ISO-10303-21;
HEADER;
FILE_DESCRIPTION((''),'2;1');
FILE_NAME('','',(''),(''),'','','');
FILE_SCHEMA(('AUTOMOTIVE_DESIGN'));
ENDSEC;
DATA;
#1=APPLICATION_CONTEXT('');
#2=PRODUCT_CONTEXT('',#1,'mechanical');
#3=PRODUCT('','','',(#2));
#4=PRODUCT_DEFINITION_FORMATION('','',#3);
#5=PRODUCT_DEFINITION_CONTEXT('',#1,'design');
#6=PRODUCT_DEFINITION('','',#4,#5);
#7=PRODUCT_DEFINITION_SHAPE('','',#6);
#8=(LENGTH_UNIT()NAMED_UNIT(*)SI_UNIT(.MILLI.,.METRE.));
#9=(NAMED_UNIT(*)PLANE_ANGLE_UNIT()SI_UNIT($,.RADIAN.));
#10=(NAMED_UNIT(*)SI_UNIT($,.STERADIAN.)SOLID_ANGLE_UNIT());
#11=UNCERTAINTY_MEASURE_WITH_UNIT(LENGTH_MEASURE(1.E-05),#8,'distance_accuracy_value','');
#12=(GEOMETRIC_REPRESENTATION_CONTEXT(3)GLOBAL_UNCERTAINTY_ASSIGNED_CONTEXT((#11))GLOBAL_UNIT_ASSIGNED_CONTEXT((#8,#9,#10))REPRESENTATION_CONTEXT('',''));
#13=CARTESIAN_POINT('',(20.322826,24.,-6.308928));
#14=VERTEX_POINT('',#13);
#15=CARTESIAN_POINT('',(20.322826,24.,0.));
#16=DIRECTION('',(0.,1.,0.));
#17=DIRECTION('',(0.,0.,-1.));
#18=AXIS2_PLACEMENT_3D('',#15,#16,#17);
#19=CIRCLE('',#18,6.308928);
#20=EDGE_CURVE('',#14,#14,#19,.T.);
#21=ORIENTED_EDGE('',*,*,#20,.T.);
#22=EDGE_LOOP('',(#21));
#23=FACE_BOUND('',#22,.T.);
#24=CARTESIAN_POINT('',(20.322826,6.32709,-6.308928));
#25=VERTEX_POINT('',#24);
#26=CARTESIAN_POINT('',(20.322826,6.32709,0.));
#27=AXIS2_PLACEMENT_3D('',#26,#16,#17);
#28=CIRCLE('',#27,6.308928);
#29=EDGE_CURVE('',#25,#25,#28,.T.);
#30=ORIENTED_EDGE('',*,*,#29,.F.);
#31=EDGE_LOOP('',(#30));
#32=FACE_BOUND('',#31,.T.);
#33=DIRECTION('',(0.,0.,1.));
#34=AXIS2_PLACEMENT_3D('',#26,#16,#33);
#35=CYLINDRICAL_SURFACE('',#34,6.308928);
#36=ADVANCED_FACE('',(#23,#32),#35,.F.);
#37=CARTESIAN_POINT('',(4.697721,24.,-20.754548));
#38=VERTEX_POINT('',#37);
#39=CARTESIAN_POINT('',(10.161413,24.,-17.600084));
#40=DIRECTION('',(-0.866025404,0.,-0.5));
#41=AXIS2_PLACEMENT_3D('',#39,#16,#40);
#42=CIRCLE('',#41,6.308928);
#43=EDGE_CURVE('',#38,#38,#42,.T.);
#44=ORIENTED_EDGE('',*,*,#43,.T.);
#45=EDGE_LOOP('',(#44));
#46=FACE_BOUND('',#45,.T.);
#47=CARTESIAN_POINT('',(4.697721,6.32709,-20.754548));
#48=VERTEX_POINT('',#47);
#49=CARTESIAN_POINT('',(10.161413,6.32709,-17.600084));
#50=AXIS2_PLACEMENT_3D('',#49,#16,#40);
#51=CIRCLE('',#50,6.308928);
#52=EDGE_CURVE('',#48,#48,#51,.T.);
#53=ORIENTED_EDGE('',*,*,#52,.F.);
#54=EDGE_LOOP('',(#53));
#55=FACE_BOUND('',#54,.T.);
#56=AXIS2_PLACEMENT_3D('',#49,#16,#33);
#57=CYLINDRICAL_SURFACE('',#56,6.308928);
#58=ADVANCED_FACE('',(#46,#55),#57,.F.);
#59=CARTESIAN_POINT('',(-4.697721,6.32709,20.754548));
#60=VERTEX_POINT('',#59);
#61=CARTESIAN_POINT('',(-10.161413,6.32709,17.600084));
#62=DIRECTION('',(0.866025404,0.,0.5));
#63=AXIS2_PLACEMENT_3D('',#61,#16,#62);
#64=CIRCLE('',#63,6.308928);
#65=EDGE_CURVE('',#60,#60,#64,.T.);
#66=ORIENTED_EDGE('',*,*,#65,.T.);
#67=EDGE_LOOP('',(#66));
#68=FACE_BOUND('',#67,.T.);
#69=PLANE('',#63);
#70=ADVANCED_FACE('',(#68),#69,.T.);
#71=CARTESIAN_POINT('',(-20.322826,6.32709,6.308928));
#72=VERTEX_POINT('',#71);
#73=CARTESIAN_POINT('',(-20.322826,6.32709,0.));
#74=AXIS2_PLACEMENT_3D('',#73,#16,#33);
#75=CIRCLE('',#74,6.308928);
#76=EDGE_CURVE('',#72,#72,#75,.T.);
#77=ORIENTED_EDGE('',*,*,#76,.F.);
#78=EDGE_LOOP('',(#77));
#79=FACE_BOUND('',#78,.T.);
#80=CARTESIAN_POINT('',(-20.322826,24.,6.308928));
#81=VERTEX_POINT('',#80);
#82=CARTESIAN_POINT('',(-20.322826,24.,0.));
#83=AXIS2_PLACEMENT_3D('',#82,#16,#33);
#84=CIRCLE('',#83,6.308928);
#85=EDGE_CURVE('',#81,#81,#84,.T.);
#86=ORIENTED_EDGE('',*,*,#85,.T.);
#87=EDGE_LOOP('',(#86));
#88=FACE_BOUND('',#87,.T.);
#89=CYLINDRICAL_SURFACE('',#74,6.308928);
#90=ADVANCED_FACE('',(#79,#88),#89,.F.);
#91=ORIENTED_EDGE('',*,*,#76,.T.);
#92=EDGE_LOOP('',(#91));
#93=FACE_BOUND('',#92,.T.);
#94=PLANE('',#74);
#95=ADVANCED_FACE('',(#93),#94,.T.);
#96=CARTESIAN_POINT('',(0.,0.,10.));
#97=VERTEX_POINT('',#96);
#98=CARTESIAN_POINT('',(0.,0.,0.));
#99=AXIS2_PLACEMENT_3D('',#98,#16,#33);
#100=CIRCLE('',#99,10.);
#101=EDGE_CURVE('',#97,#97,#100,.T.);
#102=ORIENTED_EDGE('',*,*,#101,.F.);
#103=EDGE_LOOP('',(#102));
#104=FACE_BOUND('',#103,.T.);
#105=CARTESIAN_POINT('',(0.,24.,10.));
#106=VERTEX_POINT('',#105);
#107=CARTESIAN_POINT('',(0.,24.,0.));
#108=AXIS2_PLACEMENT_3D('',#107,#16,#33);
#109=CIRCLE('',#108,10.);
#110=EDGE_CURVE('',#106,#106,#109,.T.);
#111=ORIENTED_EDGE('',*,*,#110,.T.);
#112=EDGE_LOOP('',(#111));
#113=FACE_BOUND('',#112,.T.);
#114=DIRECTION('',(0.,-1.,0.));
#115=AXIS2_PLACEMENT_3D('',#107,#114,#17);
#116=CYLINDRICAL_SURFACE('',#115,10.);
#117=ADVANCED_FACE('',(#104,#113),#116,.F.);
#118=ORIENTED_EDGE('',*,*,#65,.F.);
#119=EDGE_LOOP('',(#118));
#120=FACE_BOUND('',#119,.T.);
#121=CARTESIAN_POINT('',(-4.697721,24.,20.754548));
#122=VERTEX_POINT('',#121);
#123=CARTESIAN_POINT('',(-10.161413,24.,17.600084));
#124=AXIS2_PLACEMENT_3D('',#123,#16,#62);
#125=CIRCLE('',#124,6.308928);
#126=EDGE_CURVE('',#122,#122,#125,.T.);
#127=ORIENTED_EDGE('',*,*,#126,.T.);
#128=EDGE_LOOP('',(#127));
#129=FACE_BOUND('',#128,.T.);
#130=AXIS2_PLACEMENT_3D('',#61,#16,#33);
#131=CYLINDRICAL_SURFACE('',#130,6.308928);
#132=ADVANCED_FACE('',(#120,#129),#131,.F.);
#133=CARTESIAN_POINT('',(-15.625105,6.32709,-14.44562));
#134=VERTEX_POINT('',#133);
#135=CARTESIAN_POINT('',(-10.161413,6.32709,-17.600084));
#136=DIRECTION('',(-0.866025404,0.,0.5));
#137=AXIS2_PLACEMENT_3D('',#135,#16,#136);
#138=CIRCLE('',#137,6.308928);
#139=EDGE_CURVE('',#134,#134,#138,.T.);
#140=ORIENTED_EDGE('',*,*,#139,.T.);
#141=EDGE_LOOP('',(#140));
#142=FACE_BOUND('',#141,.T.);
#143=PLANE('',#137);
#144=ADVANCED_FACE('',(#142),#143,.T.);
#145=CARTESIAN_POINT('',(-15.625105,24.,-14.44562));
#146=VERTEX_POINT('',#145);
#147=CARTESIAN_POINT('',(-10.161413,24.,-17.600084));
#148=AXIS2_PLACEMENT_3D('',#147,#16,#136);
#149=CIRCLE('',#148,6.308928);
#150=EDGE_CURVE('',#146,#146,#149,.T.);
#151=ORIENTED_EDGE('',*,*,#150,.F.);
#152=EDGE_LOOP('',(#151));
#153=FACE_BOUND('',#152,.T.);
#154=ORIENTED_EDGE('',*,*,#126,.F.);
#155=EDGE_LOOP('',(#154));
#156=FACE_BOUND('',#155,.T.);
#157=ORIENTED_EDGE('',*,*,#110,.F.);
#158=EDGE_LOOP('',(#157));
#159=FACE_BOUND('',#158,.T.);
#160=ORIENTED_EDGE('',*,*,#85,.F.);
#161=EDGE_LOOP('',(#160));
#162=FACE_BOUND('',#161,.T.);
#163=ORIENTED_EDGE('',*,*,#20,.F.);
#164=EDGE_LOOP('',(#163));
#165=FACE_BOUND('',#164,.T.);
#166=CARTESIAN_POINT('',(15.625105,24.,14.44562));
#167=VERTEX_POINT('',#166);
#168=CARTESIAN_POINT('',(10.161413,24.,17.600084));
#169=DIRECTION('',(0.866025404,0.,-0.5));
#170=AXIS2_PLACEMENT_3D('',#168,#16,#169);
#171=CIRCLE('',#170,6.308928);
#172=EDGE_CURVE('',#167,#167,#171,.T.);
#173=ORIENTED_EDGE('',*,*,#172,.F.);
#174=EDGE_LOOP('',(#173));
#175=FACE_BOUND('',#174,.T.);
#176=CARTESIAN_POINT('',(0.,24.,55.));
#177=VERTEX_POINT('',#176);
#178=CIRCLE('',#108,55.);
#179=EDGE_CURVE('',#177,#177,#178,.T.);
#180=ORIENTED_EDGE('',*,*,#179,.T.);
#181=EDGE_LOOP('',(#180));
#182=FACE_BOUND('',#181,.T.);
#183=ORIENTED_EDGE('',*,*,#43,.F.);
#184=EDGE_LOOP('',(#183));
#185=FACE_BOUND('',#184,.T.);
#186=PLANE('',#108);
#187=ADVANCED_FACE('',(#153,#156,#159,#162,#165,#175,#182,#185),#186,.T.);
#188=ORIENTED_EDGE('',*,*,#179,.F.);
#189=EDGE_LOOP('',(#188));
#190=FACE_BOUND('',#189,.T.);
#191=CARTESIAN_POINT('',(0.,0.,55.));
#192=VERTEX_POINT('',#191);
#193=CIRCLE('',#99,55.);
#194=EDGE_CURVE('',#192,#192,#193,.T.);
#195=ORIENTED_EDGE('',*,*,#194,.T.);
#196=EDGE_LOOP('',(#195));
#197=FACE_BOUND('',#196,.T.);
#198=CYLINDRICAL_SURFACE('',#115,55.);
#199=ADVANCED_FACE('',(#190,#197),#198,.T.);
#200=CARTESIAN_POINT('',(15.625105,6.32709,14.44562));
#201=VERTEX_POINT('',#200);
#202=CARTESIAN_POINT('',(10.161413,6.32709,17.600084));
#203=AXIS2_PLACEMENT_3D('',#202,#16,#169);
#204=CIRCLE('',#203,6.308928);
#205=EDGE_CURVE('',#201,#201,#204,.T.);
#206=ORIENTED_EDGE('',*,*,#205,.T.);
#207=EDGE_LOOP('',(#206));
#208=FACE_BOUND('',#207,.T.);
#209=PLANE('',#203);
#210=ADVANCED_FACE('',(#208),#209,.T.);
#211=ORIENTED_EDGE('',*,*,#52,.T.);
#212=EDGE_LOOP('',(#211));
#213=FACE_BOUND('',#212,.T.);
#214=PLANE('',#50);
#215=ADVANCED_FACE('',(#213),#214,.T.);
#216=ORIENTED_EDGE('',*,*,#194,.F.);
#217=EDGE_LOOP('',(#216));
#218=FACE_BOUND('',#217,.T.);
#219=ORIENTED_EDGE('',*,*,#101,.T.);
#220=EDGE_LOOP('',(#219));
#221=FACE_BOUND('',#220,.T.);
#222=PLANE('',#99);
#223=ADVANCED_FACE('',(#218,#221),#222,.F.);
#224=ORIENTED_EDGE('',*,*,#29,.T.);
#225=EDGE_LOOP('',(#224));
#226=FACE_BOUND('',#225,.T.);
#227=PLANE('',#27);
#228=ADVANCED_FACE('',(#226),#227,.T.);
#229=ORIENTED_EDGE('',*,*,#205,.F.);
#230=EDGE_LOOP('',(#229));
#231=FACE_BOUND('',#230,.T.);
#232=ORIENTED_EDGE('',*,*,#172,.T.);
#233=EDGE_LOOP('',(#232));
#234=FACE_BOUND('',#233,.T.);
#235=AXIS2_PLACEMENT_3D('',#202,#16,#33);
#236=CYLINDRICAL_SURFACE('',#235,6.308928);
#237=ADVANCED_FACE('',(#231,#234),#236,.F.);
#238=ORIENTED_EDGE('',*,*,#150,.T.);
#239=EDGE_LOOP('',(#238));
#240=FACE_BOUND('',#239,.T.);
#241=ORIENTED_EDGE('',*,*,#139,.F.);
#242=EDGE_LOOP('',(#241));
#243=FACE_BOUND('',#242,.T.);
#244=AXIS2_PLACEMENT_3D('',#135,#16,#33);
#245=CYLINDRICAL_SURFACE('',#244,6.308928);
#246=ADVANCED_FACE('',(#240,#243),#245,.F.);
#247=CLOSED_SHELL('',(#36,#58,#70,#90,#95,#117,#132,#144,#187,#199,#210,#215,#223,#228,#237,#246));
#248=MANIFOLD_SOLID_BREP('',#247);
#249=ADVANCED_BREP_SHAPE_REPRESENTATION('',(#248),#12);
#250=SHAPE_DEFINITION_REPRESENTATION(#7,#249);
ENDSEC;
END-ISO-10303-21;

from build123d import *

# Parameters (mm, degrees)
SKETCH1_R           = 55
BOSS_EXTRUDE1_DEPTH = 24
SKETCH2_R           = 10
CUT_EXTRUDE1_DEPTH  = 82.4002457
SKETCH3_R           = 6.3089282
CUT_EXTRUDE2_DEPTH  = 17.672909829
CIRPATTERN1_COUNT   = 6


with BuildPart() as part:
    # Sketch1 → Boss-Extrude1 (new body)
    with BuildSketch(Plane(origin=(0, 0, 0), x_dir=(1, 0, 0), z_dir=(0, 1, 0))):
        Circle(SKETCH1_R)
    extrude(amount=BOSS_EXTRUDE1_DEPTH)

    # Sketch2 → Cut-Extrude1 (cut, through all)
    with BuildSketch(Plane(origin=(0, 0, 0), x_dir=(1, 0, 0), z_dir=(0, 1, 0))):
        Circle(SKETCH2_R)
    extrude(amount=CUT_EXTRUDE1_DEPTH, mode=Mode.SUBTRACT)

    # Sketch3 → Cut-Extrude2 (cut)
    with BuildSketch(Plane(origin=(0, 24, 0), x_dir=(1, 0, 0), z_dir=(0, 1, 0))):
        with Locations((-20.322826391, 0)):
            Circle(SKETCH3_R)
    cut_extrude2 = extrude(amount=-CUT_EXTRUDE2_DEPTH, mode=Mode.SUBTRACT)

    # CirPattern1: Cut-Extrude2 ×6 about axis
    cirpattern1_axis = Axis((0, 0, 0), (0, 1, 0))
    for i in range(1, CIRPATTERN1_COUNT):
        add(cut_extrude2.rotate(cirpattern1_axis, i * 360 / CIRPATTERN1_COUNT), mode=Mode.SUBTRACT)


solid = part.part
